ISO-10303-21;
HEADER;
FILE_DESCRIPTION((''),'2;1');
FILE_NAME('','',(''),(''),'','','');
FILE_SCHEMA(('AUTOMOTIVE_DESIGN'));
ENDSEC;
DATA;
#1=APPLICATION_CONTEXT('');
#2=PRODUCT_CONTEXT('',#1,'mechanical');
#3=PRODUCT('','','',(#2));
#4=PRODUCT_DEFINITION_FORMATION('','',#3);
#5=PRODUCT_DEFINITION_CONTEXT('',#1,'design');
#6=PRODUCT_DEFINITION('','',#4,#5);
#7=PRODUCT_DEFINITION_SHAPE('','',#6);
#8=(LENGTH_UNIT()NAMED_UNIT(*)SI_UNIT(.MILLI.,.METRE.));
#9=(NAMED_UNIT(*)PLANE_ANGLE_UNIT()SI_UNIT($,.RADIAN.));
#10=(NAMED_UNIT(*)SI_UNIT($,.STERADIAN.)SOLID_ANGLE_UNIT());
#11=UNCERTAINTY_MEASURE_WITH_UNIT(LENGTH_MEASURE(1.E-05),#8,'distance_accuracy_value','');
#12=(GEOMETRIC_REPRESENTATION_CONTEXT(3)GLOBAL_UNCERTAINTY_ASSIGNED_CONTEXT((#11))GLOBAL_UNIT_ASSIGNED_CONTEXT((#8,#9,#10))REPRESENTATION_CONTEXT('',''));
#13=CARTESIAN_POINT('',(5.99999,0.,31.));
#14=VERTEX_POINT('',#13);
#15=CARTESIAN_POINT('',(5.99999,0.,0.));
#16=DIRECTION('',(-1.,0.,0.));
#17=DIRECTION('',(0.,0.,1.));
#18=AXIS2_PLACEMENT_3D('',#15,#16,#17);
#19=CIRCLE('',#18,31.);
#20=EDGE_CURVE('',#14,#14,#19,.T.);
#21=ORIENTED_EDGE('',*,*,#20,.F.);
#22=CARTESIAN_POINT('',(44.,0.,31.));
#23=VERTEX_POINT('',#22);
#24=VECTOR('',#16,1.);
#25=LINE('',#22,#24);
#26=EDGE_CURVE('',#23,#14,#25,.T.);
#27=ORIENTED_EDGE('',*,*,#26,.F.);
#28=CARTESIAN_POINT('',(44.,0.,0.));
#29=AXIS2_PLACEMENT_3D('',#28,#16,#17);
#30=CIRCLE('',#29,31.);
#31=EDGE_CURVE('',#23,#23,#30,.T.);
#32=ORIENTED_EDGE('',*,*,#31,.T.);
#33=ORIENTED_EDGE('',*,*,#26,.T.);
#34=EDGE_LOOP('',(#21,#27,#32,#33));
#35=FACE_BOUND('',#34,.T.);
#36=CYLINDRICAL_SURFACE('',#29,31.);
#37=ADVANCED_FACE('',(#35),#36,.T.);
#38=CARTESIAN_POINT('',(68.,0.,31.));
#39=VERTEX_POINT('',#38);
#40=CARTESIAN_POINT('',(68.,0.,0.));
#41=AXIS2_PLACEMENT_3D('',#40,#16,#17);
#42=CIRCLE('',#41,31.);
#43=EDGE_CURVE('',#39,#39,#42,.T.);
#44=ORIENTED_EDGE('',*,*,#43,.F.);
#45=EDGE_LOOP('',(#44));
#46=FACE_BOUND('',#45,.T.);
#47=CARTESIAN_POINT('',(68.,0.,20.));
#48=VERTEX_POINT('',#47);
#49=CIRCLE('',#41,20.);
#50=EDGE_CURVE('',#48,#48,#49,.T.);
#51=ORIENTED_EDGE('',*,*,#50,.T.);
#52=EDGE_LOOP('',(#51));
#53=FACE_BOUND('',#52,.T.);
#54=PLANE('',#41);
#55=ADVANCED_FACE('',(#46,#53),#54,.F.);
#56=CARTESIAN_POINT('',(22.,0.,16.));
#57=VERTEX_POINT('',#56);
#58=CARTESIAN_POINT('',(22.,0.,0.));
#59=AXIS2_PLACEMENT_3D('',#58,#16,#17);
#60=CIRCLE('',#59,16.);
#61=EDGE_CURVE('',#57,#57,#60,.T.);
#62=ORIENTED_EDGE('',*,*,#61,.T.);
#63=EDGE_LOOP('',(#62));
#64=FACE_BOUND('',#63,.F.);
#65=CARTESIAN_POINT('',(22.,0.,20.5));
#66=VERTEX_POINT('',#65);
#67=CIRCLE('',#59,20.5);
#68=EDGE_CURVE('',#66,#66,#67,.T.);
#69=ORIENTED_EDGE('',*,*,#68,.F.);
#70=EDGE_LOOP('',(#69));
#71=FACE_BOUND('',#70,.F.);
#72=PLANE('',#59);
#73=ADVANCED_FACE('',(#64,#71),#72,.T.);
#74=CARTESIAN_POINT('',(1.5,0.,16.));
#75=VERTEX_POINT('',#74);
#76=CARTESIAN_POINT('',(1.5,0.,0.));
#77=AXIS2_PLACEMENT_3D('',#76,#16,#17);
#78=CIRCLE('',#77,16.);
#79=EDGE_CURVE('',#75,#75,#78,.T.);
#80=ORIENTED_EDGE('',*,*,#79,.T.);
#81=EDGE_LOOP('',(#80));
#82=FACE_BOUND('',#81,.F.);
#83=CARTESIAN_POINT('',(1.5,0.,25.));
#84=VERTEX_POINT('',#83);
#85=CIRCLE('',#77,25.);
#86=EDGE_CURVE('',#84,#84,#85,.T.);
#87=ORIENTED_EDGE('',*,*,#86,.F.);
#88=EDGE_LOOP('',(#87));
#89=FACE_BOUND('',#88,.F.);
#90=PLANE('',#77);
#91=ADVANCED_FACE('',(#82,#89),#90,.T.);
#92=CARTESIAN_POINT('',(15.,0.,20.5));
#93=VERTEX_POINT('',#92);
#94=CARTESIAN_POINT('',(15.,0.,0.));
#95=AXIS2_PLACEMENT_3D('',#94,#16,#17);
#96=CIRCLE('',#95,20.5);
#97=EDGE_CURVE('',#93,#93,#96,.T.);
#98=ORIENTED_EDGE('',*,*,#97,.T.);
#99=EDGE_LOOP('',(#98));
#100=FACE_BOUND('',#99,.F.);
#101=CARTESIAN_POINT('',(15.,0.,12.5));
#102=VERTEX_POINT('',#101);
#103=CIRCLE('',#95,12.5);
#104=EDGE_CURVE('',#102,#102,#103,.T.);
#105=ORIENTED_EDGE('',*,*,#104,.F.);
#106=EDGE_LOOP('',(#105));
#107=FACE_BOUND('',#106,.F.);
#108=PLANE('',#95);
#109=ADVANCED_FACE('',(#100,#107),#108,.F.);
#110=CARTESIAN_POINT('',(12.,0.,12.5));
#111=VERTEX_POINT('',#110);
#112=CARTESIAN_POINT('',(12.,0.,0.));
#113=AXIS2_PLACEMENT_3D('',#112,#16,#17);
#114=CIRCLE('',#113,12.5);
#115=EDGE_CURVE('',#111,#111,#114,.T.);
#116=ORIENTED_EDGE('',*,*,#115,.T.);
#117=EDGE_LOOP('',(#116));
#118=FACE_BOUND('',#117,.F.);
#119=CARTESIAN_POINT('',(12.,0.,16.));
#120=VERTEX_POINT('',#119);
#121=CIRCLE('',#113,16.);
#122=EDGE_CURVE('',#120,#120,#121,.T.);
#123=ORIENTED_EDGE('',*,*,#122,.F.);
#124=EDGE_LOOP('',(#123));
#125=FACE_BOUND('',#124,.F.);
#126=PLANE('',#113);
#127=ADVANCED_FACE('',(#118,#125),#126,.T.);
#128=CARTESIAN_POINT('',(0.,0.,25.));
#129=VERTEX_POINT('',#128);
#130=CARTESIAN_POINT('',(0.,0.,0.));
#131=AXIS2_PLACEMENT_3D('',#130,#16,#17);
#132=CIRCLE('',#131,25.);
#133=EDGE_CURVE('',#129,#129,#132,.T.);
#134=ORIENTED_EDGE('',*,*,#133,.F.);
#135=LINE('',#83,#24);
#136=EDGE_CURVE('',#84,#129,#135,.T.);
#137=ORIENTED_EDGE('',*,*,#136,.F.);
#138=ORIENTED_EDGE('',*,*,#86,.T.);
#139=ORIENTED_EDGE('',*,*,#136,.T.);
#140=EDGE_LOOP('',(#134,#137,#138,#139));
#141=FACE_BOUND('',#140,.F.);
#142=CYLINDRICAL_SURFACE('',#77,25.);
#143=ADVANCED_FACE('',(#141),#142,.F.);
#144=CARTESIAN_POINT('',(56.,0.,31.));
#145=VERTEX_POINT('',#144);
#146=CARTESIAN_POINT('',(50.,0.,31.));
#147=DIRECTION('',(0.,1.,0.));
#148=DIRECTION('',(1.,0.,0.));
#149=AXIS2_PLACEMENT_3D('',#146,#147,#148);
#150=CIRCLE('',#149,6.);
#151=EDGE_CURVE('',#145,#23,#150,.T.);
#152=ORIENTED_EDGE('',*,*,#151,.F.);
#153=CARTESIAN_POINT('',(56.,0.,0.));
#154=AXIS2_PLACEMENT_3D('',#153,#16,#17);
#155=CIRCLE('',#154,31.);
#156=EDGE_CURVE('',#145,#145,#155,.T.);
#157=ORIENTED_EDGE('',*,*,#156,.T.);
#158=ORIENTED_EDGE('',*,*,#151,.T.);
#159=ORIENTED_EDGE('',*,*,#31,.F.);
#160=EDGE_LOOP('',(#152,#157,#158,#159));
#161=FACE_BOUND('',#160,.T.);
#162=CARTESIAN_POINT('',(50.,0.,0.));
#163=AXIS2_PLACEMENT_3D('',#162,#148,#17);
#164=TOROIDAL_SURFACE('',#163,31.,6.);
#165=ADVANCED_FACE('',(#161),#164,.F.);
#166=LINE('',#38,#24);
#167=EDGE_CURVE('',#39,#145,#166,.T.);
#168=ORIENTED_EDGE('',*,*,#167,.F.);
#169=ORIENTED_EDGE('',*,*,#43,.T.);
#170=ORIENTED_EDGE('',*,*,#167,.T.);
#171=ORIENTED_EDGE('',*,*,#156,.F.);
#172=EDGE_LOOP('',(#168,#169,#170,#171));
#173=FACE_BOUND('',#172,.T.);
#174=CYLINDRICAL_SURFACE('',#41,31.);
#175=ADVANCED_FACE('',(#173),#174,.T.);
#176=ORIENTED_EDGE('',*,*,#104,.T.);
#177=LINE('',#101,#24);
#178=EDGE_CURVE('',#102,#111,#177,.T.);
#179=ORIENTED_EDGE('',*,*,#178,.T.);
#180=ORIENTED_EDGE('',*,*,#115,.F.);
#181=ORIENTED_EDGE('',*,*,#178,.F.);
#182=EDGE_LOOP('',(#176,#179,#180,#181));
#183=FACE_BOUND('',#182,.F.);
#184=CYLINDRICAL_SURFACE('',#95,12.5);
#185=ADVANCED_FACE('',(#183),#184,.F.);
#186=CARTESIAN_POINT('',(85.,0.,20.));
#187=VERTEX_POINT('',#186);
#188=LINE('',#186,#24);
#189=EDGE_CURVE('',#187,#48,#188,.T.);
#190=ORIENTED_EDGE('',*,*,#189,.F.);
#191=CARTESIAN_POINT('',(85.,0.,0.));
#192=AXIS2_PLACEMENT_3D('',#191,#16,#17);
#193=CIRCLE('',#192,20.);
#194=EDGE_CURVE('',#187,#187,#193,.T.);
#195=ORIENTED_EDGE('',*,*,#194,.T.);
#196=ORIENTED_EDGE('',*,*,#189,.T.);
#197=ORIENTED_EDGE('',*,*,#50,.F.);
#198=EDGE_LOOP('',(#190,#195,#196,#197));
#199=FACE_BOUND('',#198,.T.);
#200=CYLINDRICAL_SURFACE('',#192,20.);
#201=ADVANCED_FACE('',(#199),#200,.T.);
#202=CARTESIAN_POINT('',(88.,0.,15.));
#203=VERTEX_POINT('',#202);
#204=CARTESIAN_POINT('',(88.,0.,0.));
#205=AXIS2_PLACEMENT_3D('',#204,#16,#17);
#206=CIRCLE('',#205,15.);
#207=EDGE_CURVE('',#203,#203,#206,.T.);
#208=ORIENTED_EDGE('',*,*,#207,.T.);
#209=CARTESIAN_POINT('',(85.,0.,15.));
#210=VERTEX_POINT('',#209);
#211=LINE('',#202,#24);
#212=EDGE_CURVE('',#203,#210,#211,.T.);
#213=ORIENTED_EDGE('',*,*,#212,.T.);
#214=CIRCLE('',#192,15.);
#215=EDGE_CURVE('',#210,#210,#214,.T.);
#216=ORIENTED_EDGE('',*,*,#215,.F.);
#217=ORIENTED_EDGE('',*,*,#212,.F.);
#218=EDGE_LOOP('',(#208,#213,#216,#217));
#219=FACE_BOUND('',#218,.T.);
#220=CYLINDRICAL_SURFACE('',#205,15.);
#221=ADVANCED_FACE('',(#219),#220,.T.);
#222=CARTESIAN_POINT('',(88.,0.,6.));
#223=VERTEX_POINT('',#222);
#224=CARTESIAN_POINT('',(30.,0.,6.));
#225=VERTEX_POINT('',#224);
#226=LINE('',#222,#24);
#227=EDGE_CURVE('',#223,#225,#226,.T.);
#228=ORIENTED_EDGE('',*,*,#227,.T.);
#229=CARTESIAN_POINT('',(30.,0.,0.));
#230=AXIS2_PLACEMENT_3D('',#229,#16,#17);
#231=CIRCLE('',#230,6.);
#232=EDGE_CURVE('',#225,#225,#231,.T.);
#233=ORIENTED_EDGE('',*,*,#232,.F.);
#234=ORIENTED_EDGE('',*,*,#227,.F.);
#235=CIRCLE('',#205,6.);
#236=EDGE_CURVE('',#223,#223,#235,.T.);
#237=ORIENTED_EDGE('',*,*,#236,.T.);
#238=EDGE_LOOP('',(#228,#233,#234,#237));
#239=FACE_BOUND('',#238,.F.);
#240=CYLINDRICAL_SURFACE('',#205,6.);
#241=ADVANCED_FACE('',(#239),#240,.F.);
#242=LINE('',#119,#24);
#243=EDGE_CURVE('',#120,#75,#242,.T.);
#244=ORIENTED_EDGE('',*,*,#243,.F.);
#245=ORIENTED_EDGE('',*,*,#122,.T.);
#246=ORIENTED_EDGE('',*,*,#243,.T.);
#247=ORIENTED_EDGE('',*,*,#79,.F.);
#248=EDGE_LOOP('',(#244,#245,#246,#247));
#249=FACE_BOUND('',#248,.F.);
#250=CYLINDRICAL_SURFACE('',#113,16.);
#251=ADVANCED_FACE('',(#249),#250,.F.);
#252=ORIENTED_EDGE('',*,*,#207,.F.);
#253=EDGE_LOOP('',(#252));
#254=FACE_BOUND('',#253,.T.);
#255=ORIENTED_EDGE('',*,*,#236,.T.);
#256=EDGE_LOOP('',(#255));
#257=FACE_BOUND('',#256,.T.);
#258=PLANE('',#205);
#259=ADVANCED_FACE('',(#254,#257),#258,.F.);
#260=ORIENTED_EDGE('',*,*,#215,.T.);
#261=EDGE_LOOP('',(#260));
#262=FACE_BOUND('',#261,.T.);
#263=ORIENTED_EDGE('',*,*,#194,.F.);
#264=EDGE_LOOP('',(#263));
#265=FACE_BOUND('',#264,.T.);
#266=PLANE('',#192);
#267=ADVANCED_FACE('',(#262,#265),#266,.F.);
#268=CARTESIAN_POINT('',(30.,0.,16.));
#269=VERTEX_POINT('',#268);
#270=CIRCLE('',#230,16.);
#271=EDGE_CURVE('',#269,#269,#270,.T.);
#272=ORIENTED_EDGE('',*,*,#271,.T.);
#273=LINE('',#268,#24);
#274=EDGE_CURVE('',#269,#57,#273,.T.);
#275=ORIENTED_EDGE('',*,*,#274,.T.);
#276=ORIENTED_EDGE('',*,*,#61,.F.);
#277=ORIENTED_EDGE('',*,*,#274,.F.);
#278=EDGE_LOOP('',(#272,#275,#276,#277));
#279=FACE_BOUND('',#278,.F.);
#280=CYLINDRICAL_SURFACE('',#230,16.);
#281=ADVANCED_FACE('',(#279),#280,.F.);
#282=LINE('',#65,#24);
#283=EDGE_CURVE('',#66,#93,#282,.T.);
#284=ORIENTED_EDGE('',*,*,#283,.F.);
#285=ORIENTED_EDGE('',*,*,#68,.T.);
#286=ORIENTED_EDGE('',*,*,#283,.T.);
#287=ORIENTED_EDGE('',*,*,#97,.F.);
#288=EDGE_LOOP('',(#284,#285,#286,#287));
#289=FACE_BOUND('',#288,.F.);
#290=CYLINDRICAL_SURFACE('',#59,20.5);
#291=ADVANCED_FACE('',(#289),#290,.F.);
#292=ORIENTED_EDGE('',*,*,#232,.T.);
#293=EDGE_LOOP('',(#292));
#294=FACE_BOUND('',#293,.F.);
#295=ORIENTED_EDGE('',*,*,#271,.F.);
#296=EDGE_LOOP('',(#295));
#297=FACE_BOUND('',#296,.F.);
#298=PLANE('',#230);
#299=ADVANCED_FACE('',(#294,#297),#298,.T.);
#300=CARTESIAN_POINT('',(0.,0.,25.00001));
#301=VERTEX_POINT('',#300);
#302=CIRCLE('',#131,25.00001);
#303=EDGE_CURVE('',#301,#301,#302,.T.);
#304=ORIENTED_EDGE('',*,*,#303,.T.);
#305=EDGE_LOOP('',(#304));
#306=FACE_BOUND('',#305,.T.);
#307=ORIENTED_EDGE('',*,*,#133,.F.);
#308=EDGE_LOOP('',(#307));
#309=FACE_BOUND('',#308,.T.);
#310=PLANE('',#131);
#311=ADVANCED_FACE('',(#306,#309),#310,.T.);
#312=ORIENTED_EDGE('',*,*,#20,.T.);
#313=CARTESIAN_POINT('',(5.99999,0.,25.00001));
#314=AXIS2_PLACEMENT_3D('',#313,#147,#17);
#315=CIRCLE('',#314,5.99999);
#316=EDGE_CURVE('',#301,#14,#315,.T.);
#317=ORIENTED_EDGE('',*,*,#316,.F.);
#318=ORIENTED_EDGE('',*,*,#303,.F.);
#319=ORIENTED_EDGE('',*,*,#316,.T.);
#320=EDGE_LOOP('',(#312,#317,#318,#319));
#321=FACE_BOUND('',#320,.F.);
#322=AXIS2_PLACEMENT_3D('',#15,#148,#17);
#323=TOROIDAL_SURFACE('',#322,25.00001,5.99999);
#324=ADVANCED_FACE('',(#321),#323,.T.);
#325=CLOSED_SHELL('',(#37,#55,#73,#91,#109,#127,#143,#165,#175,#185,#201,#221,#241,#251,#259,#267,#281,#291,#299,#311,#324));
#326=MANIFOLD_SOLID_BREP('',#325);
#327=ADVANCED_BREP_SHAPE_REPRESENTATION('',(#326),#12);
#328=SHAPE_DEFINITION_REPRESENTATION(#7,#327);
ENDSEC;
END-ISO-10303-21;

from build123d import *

# Parameters (mm, degrees)
F4_R = 5.99999


# Not quite as in the source:
# - a fillet or chamfer is up to 0.001 mm smaller than in the source, because OpenCascade refuses the exact size


with BuildPart() as f1:
    # F0 (on Front) → F1 (revolve)
    with BuildSketch(Plane.XZ):
        with BuildLine():
            Line((0, 31), (0, 0))
            Line((0, 0), (88, 0))
            Line((88, 0), (88, 15))
            Line((88, 15), (85, 15))
            Line((85, 15), (85, 20))
            Line((85, 20), (68, 20))
            Line((68, 20), (68, 31))
            Line((68, 31), (56, 31))
            ThreePointArc((56, 31), (50, 25), (44, 31))
            Line((44, 31), (0, 31))
        make_face()
    revolve(axis=Axis((44, 0, 0), (-1, 0, 0)))

    # F2 (on Front) → F3 (revolve, cut)
    with BuildSketch(Plane.XZ):
        Polygon((0, 25), (0, 0), (88, 0), (88, 6), (30, 6), (30, 16), (22, 16), (22, 20.5), (15, 20.5), (15, 12.5), (12, 12.5), (12, 16), (1.5, 16), (1.5, 25), align=None)
    revolve(axis=Axis((29.9785251319, 0, 0), (-1, 0, 0)), mode=Mode.SUBTRACT)

    # F4 (radius 6 in the source; OpenCascade refuses exactly that, so slightly less here)
    f4_edges = [f1.edges().sort_by_distance(p)[0] for p in [
        (0, 0, -31),
    ]]
    fillet(f4_edges, radius=F4_R)


solid = f1.part
